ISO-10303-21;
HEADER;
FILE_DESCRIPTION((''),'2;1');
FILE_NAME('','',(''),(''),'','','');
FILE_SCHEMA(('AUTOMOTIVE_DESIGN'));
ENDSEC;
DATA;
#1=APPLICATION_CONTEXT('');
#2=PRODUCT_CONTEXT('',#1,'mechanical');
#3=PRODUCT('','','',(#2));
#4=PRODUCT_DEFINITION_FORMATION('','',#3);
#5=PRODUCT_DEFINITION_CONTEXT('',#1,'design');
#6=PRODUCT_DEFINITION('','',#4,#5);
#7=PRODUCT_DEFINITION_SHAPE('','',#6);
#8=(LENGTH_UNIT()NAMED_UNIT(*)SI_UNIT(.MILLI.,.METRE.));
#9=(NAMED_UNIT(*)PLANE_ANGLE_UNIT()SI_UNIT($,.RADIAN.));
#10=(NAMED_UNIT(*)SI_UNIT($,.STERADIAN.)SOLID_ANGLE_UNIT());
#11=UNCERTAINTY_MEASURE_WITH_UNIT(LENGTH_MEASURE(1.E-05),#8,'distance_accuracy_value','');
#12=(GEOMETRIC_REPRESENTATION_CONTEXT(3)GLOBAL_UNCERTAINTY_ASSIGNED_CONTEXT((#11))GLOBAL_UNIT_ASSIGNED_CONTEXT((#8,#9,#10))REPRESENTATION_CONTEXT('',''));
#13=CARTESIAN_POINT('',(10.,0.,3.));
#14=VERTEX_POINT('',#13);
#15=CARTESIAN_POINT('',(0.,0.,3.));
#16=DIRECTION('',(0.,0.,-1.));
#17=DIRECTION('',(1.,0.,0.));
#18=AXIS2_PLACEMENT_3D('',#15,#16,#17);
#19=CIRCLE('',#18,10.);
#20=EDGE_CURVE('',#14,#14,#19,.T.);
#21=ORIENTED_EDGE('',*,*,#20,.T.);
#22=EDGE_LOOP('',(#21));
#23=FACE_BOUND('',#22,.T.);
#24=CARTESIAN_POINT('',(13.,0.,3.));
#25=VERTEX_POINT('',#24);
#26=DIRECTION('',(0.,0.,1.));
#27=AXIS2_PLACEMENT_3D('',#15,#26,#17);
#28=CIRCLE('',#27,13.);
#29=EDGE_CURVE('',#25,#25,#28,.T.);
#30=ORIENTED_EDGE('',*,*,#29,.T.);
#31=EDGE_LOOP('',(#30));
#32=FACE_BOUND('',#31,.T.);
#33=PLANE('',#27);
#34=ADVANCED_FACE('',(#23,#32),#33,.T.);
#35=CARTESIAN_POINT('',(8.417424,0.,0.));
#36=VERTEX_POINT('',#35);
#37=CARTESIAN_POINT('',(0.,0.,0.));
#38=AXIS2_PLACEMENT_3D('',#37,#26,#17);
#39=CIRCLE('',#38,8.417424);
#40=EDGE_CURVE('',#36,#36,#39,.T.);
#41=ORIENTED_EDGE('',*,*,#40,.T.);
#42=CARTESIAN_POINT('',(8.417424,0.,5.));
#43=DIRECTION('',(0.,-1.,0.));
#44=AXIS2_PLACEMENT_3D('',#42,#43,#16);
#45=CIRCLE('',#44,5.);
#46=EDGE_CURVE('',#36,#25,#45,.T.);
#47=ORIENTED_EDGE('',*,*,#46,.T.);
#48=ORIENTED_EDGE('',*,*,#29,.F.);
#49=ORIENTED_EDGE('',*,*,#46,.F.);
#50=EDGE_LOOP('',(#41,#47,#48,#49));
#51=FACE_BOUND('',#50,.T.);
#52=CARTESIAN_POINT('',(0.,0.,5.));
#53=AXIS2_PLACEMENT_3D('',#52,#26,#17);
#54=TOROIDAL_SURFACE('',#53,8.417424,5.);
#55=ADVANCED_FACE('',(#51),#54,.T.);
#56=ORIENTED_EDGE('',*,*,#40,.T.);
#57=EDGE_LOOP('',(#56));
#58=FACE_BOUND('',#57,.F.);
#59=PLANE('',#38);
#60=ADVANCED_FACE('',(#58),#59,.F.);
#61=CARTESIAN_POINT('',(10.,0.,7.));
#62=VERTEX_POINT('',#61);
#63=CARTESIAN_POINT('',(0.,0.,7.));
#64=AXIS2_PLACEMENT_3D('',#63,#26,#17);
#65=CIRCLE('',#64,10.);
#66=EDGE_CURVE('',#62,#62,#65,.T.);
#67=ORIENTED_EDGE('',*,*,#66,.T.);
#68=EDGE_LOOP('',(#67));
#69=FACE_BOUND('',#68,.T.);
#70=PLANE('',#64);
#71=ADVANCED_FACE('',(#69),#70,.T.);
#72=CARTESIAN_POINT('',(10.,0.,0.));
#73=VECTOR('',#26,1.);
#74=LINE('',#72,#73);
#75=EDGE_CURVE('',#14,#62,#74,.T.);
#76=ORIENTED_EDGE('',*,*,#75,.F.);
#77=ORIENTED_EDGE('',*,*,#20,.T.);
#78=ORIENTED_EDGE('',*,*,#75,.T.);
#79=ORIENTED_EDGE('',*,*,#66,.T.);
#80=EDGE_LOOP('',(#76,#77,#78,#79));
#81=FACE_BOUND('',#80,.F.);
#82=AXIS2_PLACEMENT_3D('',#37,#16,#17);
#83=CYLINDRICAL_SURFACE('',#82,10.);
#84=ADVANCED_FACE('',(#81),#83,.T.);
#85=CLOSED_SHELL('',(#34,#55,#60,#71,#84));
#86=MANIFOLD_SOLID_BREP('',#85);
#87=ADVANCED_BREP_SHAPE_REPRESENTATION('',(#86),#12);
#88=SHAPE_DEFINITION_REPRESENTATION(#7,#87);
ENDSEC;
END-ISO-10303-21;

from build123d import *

# Parameters (mm, degrees)
F1_R     = 10
F2_DEPTH = 7
F0_R     = 13
F3_DEPTH = 3


# Not quite as in the source:
# - a fillet or chamfer that OpenCascade refuses, or shapes differently, is made with other operations: its cross-section is extruded or revolved along the edge and cut away or added


with BuildPart() as f2:
    # F1 (on Top) → F2 (new body)
    with BuildSketch(Plane.XY):
        Circle(F1_R)
    extrude(amount=F2_DEPTH)

    # F0 (on Top) → F3 (join)
    with BuildSketch(Plane.XY):
        Circle(F0_R)
    extrude(amount=F3_DEPTH)

    # F4: fillet of radius 5 on 1 edges, made by hand

    # F4_s1 → F4_t2 (revolve, cut)
    with BuildSketch(Plane.XZ):
        with BuildLine():
            ThreePointArc((8.417424305, 0), (11.1560370926, 0.8166998673), (13, 3))
            Line((13, 3), (13, 0))
            Line((13, 0), (8.417424305, 0))
        make_face()
    revolve(axis=Axis((0, 0, 0), (0, 0, 1)), mode=Mode.SUBTRACT)


solid = f2.part
